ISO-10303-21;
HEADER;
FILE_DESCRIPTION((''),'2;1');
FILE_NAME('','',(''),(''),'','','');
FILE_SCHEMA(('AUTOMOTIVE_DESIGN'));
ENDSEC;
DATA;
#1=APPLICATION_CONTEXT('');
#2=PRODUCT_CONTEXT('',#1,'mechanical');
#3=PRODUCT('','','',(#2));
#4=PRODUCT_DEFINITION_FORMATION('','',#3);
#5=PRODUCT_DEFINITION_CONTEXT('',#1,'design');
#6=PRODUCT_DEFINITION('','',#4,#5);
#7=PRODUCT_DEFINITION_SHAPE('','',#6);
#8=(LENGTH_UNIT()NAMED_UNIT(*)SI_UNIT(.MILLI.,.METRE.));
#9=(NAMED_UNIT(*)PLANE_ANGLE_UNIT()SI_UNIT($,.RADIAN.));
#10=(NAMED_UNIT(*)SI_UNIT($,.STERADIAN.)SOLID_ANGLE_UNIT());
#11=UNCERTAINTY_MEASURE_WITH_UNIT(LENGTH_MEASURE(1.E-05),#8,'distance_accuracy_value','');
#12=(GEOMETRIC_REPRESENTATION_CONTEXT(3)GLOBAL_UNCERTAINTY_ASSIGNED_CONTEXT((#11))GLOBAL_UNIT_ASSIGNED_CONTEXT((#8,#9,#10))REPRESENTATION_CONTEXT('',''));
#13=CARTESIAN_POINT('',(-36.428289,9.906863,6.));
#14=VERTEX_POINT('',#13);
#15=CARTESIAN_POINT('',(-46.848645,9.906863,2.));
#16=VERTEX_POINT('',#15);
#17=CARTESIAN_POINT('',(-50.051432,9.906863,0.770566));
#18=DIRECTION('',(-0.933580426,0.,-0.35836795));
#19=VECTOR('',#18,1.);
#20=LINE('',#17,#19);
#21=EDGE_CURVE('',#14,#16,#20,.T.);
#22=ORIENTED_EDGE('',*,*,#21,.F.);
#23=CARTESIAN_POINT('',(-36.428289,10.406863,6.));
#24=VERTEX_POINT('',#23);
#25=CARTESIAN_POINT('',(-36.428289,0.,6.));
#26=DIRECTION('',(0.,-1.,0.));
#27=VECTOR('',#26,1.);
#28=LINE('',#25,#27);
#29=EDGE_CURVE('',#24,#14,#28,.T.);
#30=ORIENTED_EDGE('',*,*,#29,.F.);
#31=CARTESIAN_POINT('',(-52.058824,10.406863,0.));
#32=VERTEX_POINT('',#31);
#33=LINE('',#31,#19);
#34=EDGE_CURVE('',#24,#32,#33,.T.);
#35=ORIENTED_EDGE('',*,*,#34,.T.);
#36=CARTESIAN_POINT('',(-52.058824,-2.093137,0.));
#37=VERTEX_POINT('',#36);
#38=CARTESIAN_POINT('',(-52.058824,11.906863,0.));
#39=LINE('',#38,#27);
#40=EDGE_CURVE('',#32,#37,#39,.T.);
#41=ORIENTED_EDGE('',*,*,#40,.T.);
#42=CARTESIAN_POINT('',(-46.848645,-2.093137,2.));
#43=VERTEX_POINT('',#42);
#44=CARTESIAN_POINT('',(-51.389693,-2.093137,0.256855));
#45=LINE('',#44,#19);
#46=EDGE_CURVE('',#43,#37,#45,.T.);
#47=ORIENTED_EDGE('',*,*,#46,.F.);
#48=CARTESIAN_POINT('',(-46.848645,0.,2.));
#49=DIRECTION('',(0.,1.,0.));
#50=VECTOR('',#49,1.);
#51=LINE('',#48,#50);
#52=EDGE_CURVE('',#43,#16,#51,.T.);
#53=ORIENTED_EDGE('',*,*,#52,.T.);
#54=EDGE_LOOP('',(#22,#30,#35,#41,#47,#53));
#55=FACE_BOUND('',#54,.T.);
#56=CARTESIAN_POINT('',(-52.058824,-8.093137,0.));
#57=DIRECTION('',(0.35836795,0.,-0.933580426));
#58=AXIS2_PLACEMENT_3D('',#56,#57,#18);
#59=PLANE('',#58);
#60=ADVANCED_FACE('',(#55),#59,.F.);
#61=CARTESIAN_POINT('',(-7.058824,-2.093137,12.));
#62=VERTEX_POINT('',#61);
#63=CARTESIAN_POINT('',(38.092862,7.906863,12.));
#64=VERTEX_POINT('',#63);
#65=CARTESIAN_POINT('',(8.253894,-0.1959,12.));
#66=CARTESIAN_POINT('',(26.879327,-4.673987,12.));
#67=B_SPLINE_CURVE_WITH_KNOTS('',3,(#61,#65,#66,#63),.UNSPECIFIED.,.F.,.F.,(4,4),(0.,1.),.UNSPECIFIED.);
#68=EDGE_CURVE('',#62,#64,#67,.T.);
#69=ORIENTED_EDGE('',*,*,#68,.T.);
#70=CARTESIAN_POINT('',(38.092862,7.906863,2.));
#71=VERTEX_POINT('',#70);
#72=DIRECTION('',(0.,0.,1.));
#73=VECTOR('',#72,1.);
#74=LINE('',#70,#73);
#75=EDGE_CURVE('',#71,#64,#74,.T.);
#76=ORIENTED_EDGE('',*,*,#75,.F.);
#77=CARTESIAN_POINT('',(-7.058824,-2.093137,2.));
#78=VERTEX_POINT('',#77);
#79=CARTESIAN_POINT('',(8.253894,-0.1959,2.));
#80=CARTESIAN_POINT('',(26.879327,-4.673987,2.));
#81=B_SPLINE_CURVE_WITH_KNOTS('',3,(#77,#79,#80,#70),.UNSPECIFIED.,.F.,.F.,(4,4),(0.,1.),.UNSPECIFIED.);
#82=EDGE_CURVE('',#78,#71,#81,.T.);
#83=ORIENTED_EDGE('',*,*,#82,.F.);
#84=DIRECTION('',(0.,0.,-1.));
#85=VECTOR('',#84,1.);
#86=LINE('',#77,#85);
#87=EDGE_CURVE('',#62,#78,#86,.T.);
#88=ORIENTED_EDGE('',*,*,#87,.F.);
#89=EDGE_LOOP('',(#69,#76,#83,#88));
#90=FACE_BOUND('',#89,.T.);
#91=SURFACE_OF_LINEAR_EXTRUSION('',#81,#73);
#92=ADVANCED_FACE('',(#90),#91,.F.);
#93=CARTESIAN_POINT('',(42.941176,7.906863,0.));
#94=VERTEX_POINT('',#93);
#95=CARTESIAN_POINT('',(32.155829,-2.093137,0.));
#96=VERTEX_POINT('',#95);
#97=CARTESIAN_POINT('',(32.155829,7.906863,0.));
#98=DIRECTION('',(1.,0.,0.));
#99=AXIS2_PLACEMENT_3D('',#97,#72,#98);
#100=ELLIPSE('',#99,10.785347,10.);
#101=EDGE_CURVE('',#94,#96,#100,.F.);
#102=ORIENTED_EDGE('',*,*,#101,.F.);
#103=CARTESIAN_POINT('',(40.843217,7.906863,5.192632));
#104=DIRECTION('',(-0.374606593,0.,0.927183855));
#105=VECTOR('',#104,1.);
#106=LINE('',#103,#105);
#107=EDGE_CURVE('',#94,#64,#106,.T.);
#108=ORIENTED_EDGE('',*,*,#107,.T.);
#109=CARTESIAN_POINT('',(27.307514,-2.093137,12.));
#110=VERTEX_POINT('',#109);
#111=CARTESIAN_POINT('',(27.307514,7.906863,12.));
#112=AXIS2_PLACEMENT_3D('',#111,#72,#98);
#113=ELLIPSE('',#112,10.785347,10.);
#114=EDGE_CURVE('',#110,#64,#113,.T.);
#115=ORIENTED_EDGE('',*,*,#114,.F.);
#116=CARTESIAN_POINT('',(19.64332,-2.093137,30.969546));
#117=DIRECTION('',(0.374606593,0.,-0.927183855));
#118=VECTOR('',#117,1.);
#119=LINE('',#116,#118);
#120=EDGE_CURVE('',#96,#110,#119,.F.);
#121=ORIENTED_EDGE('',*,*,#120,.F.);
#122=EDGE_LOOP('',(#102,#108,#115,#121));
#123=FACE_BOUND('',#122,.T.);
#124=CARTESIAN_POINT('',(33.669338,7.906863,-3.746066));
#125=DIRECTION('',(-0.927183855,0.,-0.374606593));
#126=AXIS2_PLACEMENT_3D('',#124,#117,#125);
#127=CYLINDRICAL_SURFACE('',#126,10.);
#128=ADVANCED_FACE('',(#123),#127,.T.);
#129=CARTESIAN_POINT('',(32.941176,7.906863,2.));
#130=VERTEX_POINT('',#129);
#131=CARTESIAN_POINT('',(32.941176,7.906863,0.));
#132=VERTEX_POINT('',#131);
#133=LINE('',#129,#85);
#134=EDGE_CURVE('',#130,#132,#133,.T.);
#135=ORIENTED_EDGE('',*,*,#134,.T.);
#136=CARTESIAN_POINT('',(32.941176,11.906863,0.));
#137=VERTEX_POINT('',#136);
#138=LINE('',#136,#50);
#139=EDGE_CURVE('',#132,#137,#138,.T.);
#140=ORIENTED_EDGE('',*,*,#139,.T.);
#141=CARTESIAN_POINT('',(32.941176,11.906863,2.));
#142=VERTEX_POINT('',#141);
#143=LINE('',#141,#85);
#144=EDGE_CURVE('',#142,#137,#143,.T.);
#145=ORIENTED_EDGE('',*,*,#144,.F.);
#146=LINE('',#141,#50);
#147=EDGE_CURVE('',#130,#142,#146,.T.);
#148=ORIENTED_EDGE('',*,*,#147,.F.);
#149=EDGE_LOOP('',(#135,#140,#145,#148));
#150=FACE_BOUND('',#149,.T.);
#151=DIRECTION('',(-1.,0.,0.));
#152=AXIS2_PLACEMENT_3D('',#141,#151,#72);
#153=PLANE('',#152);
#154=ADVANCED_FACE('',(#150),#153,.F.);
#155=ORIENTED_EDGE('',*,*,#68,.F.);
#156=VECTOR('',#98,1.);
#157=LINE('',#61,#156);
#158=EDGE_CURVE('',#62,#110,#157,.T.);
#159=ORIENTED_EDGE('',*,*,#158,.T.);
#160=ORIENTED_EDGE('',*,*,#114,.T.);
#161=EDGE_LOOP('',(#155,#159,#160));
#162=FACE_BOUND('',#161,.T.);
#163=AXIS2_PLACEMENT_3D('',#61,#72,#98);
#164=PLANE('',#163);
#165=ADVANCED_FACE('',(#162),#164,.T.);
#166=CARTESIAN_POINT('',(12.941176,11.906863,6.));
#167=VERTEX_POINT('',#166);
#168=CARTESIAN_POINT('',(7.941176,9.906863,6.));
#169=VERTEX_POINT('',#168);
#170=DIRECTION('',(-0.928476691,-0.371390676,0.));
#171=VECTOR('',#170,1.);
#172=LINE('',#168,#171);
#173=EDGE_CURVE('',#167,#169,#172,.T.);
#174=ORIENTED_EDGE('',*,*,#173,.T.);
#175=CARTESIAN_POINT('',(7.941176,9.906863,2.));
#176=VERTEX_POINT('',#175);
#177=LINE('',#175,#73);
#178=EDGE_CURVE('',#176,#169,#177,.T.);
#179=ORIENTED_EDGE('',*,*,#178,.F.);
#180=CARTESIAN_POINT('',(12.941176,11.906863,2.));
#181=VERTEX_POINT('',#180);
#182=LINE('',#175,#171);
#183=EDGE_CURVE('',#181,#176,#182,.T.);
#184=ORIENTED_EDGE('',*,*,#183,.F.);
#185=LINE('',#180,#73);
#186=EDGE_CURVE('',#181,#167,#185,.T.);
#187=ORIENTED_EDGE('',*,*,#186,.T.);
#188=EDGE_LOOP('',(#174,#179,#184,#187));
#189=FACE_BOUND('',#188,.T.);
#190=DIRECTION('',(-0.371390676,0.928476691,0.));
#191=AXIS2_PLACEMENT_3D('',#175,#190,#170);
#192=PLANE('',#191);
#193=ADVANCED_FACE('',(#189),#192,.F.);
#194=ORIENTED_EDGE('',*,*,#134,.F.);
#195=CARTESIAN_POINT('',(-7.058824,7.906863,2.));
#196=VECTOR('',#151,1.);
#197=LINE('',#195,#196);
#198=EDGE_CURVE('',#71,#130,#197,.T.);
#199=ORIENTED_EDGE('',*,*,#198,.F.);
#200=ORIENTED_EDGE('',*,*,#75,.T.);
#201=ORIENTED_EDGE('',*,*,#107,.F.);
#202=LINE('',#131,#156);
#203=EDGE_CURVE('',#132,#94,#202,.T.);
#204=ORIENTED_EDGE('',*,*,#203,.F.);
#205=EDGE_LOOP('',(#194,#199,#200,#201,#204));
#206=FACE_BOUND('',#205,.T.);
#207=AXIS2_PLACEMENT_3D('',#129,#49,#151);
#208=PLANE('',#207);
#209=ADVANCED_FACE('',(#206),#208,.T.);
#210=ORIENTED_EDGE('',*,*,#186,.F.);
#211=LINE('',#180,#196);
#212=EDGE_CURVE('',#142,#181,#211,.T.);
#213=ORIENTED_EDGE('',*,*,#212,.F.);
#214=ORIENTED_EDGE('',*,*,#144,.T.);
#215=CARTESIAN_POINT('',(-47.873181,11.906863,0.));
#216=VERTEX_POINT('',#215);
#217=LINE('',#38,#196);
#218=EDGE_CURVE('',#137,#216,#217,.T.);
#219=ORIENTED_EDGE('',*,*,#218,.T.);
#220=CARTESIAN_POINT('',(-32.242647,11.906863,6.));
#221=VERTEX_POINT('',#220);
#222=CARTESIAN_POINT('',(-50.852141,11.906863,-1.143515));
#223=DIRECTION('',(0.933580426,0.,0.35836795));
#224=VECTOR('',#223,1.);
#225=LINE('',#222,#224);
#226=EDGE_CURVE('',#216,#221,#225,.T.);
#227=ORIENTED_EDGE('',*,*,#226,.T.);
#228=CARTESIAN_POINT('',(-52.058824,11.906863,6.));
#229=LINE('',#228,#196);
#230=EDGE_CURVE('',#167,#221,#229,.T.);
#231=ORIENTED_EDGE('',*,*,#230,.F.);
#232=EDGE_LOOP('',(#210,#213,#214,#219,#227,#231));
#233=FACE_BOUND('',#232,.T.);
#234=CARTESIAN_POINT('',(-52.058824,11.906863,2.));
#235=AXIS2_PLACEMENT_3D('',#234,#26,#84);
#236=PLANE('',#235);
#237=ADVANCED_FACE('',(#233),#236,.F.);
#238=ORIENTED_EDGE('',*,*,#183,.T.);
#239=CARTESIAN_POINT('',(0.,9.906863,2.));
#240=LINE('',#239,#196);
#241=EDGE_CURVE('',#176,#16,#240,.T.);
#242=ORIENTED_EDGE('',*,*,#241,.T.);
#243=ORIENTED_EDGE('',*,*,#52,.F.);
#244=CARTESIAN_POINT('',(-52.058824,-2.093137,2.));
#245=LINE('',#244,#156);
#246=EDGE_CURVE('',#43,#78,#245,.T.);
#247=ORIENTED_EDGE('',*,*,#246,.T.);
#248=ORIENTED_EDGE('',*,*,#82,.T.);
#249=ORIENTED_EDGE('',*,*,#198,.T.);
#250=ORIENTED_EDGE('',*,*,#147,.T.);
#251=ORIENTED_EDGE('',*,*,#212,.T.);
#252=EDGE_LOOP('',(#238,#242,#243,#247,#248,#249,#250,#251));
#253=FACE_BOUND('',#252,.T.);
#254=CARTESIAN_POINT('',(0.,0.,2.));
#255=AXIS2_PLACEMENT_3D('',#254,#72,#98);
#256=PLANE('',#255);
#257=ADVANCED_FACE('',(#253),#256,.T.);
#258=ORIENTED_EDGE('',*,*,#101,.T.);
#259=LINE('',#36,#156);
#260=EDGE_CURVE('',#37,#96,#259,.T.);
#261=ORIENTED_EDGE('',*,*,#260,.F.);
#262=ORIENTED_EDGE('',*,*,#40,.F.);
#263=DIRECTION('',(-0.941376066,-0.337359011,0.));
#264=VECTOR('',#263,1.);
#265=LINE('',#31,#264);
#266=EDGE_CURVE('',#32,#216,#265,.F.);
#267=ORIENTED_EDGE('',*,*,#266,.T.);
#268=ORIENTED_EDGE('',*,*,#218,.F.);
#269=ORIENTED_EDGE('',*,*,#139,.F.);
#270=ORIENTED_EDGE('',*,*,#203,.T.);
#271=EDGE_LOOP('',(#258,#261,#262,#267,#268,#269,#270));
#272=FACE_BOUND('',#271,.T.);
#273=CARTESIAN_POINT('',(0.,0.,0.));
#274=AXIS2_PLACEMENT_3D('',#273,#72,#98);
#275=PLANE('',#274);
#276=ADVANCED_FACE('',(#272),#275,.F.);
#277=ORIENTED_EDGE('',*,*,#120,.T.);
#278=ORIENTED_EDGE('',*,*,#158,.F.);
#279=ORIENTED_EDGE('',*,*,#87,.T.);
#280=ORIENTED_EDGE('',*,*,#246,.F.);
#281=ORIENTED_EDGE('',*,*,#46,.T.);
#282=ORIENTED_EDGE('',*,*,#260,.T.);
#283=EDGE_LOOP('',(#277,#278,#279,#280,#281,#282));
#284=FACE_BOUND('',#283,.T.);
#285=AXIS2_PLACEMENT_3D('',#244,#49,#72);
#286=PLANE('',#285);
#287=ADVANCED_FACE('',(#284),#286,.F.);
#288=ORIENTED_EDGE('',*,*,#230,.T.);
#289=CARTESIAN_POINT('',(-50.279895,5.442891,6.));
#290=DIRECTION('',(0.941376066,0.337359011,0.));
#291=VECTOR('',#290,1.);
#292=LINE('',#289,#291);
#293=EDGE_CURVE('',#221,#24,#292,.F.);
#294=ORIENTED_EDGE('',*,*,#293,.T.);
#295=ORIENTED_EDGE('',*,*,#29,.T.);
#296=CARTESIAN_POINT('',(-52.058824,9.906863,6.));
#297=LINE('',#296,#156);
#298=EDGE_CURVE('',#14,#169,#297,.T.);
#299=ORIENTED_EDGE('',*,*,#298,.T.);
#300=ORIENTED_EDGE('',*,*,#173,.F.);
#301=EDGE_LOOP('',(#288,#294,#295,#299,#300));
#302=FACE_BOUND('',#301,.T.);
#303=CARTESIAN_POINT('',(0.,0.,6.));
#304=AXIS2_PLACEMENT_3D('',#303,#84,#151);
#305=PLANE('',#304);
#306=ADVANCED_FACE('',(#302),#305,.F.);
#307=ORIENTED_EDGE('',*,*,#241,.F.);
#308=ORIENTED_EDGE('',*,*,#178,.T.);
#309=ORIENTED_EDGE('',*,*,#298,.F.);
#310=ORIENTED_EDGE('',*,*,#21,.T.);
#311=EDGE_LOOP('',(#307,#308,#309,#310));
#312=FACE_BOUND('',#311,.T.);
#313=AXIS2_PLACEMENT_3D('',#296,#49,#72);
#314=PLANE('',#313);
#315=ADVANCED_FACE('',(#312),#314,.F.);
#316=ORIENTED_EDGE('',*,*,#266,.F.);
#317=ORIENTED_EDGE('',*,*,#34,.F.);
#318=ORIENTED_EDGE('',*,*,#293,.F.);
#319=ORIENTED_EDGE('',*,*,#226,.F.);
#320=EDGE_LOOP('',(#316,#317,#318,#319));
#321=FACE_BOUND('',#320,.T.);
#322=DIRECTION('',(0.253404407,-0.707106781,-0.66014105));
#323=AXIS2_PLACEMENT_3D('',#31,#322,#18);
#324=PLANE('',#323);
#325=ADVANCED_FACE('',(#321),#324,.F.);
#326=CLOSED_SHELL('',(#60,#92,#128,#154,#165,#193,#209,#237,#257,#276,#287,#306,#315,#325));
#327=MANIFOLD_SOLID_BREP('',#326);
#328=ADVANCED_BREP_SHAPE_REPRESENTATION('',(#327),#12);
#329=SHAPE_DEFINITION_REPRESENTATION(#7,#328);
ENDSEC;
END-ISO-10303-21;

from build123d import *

# Parameters (mm, degrees)
SKETCH1_W           = 85
SKETCH1_H           = 14
BOSS_EXTRUDE1_DEPTH = 2
SKETCH2_W           = 85
SKETCH2_H           = 2
BOSS_EXTRUDE2_DEPTH = 6
SKETCH3_W           = 10
SKETCH3_H           = 10
BOSS_EXTRUDE3_DEPTH = 2
CUT_EXTRUDE1_DEPTH  = 4
CUT_EXTRUDE2_DEPTH  = 20
CHAMFER1_SIZE       = 1.5
SKETCH6_W           = 10
SKETCH6_H           = 10
BOSS_EXTRUDE4_DEPTH = 50
CUT_EXTRUDE3_DEPTH  = 50
FILLET1_R           = 10
CUT_EXTRUDE4_DEPTH  = 10


with BuildPart() as part:
    # Sketch1 → Boss-Extrude1 (new body)
    with BuildSketch(Plane.XY):
        with Locations((-9.558823529, 4.906862745)):
            Rectangle(SKETCH1_W, SKETCH1_H)
    extrude(amount=BOSS_EXTRUDE1_DEPTH)

    # Sketch2 → Boss-Extrude2 (add)
    with BuildSketch(Plane.XY):
        with Locations((-9.558823529, 10.906862745)):
            Rectangle(SKETCH2_W, SKETCH2_H)
    extrude(amount=BOSS_EXTRUDE2_DEPTH)

    # Sketch3 → Boss-Extrude3 (add)
    with BuildSketch(Plane(origin=(0, 0, 0), x_dir=(-1, 0, 0), z_dir=(0, 0, -1))):
        with Locations((-37.941176471, 2.906862745)):
            Rectangle(SKETCH3_W, SKETCH3_H)
    extrude(amount=-BOSS_EXTRUDE3_DEPTH)

    # Sketch4 → Cut-Extrude1 (cut)
    with BuildSketch(Plane.XY.offset(6)):
        Polygon((7.941176471, 9.906862745), (12.941176471, 11.906862745), (32.941176471, 11.906862745), (32.941176471, 9.906862745), align=None)
    extrude(amount=-CUT_EXTRUDE1_DEPTH, mode=Mode.SUBTRACT)

    # Sketch5 → Cut-Extrude2 (cut)
    with BuildSketch(Plane(origin=(0, 11.906862745, 0), x_dir=(1, 0, 0), z_dir=(0, 1, 0))):
        Polygon((-52.058823529, 0), (-36.428289141, -6), (-52.058823529, -6), align=None)
    extrude(amount=-CUT_EXTRUDE2_DEPTH, mode=Mode.SUBTRACT)

    # Chamfer1
    chamfer1_edges = [part.edges().sort_by_distance(p)[0] for p in [
        (-44.243556335, 11.906862745, 3),
    ]]
    chamfer(chamfer1_edges, length=CHAMFER1_SIZE)

    # Sketch6 → Boss-Extrude4 (add)
    with BuildSketch(Plane(origin=(42.941176471, 0, 0), x_dir=(0, 0, -1), z_dir=(1, 0, 0))):
        with Locations((-7, 2.906862745)):
            Rectangle(SKETCH6_W, SKETCH6_H)
    extrude(amount=-BOSS_EXTRUDE4_DEPTH)

    # Sketch7 → Cut-Extrude3 (cut)
    with BuildSketch(Plane.XZ.offset(2.093137255)):
        Polygon((42.941176471, 0), (38.092861761, 12), (42.941176471, 12), align=None)
    extrude(amount=-CUT_EXTRUDE3_DEPTH, mode=Mode.SUBTRACT)

    # Fillet1
    fillet1_edges = [part.edges().sort_by_distance(p)[0] for p in [
        (40.517019116, -2.093137255, 6),
    ]]
    fillet(fillet1_edges, radius=FILLET1_R - 0.0001)  # a hair under: the kernel refuses the full size

    # Sketch8 → Cut-Extrude4 (cut)
    with BuildSketch(Plane.XY.offset(12)):
        with BuildLine():
            Line((-7.058823529, -2.093137255), (-7.058823529, 7.906862745))
            Line((-7.058823529, 7.906862745), (38.092861761, 7.906862745))
            add(Edge.make_bspline(
                [(-7.058823529, -2.093137255), (8.253894017, -0.195900436), (26.879326583, -4.673987429), (38.092861761, 7.906862745)],
                knots=[0, 0, 0, 0, 1, 1, 1, 1], degree=3))
        make_face()
    extrude(amount=-CUT_EXTRUDE4_DEPTH, mode=Mode.SUBTRACT)


solid = part.part
